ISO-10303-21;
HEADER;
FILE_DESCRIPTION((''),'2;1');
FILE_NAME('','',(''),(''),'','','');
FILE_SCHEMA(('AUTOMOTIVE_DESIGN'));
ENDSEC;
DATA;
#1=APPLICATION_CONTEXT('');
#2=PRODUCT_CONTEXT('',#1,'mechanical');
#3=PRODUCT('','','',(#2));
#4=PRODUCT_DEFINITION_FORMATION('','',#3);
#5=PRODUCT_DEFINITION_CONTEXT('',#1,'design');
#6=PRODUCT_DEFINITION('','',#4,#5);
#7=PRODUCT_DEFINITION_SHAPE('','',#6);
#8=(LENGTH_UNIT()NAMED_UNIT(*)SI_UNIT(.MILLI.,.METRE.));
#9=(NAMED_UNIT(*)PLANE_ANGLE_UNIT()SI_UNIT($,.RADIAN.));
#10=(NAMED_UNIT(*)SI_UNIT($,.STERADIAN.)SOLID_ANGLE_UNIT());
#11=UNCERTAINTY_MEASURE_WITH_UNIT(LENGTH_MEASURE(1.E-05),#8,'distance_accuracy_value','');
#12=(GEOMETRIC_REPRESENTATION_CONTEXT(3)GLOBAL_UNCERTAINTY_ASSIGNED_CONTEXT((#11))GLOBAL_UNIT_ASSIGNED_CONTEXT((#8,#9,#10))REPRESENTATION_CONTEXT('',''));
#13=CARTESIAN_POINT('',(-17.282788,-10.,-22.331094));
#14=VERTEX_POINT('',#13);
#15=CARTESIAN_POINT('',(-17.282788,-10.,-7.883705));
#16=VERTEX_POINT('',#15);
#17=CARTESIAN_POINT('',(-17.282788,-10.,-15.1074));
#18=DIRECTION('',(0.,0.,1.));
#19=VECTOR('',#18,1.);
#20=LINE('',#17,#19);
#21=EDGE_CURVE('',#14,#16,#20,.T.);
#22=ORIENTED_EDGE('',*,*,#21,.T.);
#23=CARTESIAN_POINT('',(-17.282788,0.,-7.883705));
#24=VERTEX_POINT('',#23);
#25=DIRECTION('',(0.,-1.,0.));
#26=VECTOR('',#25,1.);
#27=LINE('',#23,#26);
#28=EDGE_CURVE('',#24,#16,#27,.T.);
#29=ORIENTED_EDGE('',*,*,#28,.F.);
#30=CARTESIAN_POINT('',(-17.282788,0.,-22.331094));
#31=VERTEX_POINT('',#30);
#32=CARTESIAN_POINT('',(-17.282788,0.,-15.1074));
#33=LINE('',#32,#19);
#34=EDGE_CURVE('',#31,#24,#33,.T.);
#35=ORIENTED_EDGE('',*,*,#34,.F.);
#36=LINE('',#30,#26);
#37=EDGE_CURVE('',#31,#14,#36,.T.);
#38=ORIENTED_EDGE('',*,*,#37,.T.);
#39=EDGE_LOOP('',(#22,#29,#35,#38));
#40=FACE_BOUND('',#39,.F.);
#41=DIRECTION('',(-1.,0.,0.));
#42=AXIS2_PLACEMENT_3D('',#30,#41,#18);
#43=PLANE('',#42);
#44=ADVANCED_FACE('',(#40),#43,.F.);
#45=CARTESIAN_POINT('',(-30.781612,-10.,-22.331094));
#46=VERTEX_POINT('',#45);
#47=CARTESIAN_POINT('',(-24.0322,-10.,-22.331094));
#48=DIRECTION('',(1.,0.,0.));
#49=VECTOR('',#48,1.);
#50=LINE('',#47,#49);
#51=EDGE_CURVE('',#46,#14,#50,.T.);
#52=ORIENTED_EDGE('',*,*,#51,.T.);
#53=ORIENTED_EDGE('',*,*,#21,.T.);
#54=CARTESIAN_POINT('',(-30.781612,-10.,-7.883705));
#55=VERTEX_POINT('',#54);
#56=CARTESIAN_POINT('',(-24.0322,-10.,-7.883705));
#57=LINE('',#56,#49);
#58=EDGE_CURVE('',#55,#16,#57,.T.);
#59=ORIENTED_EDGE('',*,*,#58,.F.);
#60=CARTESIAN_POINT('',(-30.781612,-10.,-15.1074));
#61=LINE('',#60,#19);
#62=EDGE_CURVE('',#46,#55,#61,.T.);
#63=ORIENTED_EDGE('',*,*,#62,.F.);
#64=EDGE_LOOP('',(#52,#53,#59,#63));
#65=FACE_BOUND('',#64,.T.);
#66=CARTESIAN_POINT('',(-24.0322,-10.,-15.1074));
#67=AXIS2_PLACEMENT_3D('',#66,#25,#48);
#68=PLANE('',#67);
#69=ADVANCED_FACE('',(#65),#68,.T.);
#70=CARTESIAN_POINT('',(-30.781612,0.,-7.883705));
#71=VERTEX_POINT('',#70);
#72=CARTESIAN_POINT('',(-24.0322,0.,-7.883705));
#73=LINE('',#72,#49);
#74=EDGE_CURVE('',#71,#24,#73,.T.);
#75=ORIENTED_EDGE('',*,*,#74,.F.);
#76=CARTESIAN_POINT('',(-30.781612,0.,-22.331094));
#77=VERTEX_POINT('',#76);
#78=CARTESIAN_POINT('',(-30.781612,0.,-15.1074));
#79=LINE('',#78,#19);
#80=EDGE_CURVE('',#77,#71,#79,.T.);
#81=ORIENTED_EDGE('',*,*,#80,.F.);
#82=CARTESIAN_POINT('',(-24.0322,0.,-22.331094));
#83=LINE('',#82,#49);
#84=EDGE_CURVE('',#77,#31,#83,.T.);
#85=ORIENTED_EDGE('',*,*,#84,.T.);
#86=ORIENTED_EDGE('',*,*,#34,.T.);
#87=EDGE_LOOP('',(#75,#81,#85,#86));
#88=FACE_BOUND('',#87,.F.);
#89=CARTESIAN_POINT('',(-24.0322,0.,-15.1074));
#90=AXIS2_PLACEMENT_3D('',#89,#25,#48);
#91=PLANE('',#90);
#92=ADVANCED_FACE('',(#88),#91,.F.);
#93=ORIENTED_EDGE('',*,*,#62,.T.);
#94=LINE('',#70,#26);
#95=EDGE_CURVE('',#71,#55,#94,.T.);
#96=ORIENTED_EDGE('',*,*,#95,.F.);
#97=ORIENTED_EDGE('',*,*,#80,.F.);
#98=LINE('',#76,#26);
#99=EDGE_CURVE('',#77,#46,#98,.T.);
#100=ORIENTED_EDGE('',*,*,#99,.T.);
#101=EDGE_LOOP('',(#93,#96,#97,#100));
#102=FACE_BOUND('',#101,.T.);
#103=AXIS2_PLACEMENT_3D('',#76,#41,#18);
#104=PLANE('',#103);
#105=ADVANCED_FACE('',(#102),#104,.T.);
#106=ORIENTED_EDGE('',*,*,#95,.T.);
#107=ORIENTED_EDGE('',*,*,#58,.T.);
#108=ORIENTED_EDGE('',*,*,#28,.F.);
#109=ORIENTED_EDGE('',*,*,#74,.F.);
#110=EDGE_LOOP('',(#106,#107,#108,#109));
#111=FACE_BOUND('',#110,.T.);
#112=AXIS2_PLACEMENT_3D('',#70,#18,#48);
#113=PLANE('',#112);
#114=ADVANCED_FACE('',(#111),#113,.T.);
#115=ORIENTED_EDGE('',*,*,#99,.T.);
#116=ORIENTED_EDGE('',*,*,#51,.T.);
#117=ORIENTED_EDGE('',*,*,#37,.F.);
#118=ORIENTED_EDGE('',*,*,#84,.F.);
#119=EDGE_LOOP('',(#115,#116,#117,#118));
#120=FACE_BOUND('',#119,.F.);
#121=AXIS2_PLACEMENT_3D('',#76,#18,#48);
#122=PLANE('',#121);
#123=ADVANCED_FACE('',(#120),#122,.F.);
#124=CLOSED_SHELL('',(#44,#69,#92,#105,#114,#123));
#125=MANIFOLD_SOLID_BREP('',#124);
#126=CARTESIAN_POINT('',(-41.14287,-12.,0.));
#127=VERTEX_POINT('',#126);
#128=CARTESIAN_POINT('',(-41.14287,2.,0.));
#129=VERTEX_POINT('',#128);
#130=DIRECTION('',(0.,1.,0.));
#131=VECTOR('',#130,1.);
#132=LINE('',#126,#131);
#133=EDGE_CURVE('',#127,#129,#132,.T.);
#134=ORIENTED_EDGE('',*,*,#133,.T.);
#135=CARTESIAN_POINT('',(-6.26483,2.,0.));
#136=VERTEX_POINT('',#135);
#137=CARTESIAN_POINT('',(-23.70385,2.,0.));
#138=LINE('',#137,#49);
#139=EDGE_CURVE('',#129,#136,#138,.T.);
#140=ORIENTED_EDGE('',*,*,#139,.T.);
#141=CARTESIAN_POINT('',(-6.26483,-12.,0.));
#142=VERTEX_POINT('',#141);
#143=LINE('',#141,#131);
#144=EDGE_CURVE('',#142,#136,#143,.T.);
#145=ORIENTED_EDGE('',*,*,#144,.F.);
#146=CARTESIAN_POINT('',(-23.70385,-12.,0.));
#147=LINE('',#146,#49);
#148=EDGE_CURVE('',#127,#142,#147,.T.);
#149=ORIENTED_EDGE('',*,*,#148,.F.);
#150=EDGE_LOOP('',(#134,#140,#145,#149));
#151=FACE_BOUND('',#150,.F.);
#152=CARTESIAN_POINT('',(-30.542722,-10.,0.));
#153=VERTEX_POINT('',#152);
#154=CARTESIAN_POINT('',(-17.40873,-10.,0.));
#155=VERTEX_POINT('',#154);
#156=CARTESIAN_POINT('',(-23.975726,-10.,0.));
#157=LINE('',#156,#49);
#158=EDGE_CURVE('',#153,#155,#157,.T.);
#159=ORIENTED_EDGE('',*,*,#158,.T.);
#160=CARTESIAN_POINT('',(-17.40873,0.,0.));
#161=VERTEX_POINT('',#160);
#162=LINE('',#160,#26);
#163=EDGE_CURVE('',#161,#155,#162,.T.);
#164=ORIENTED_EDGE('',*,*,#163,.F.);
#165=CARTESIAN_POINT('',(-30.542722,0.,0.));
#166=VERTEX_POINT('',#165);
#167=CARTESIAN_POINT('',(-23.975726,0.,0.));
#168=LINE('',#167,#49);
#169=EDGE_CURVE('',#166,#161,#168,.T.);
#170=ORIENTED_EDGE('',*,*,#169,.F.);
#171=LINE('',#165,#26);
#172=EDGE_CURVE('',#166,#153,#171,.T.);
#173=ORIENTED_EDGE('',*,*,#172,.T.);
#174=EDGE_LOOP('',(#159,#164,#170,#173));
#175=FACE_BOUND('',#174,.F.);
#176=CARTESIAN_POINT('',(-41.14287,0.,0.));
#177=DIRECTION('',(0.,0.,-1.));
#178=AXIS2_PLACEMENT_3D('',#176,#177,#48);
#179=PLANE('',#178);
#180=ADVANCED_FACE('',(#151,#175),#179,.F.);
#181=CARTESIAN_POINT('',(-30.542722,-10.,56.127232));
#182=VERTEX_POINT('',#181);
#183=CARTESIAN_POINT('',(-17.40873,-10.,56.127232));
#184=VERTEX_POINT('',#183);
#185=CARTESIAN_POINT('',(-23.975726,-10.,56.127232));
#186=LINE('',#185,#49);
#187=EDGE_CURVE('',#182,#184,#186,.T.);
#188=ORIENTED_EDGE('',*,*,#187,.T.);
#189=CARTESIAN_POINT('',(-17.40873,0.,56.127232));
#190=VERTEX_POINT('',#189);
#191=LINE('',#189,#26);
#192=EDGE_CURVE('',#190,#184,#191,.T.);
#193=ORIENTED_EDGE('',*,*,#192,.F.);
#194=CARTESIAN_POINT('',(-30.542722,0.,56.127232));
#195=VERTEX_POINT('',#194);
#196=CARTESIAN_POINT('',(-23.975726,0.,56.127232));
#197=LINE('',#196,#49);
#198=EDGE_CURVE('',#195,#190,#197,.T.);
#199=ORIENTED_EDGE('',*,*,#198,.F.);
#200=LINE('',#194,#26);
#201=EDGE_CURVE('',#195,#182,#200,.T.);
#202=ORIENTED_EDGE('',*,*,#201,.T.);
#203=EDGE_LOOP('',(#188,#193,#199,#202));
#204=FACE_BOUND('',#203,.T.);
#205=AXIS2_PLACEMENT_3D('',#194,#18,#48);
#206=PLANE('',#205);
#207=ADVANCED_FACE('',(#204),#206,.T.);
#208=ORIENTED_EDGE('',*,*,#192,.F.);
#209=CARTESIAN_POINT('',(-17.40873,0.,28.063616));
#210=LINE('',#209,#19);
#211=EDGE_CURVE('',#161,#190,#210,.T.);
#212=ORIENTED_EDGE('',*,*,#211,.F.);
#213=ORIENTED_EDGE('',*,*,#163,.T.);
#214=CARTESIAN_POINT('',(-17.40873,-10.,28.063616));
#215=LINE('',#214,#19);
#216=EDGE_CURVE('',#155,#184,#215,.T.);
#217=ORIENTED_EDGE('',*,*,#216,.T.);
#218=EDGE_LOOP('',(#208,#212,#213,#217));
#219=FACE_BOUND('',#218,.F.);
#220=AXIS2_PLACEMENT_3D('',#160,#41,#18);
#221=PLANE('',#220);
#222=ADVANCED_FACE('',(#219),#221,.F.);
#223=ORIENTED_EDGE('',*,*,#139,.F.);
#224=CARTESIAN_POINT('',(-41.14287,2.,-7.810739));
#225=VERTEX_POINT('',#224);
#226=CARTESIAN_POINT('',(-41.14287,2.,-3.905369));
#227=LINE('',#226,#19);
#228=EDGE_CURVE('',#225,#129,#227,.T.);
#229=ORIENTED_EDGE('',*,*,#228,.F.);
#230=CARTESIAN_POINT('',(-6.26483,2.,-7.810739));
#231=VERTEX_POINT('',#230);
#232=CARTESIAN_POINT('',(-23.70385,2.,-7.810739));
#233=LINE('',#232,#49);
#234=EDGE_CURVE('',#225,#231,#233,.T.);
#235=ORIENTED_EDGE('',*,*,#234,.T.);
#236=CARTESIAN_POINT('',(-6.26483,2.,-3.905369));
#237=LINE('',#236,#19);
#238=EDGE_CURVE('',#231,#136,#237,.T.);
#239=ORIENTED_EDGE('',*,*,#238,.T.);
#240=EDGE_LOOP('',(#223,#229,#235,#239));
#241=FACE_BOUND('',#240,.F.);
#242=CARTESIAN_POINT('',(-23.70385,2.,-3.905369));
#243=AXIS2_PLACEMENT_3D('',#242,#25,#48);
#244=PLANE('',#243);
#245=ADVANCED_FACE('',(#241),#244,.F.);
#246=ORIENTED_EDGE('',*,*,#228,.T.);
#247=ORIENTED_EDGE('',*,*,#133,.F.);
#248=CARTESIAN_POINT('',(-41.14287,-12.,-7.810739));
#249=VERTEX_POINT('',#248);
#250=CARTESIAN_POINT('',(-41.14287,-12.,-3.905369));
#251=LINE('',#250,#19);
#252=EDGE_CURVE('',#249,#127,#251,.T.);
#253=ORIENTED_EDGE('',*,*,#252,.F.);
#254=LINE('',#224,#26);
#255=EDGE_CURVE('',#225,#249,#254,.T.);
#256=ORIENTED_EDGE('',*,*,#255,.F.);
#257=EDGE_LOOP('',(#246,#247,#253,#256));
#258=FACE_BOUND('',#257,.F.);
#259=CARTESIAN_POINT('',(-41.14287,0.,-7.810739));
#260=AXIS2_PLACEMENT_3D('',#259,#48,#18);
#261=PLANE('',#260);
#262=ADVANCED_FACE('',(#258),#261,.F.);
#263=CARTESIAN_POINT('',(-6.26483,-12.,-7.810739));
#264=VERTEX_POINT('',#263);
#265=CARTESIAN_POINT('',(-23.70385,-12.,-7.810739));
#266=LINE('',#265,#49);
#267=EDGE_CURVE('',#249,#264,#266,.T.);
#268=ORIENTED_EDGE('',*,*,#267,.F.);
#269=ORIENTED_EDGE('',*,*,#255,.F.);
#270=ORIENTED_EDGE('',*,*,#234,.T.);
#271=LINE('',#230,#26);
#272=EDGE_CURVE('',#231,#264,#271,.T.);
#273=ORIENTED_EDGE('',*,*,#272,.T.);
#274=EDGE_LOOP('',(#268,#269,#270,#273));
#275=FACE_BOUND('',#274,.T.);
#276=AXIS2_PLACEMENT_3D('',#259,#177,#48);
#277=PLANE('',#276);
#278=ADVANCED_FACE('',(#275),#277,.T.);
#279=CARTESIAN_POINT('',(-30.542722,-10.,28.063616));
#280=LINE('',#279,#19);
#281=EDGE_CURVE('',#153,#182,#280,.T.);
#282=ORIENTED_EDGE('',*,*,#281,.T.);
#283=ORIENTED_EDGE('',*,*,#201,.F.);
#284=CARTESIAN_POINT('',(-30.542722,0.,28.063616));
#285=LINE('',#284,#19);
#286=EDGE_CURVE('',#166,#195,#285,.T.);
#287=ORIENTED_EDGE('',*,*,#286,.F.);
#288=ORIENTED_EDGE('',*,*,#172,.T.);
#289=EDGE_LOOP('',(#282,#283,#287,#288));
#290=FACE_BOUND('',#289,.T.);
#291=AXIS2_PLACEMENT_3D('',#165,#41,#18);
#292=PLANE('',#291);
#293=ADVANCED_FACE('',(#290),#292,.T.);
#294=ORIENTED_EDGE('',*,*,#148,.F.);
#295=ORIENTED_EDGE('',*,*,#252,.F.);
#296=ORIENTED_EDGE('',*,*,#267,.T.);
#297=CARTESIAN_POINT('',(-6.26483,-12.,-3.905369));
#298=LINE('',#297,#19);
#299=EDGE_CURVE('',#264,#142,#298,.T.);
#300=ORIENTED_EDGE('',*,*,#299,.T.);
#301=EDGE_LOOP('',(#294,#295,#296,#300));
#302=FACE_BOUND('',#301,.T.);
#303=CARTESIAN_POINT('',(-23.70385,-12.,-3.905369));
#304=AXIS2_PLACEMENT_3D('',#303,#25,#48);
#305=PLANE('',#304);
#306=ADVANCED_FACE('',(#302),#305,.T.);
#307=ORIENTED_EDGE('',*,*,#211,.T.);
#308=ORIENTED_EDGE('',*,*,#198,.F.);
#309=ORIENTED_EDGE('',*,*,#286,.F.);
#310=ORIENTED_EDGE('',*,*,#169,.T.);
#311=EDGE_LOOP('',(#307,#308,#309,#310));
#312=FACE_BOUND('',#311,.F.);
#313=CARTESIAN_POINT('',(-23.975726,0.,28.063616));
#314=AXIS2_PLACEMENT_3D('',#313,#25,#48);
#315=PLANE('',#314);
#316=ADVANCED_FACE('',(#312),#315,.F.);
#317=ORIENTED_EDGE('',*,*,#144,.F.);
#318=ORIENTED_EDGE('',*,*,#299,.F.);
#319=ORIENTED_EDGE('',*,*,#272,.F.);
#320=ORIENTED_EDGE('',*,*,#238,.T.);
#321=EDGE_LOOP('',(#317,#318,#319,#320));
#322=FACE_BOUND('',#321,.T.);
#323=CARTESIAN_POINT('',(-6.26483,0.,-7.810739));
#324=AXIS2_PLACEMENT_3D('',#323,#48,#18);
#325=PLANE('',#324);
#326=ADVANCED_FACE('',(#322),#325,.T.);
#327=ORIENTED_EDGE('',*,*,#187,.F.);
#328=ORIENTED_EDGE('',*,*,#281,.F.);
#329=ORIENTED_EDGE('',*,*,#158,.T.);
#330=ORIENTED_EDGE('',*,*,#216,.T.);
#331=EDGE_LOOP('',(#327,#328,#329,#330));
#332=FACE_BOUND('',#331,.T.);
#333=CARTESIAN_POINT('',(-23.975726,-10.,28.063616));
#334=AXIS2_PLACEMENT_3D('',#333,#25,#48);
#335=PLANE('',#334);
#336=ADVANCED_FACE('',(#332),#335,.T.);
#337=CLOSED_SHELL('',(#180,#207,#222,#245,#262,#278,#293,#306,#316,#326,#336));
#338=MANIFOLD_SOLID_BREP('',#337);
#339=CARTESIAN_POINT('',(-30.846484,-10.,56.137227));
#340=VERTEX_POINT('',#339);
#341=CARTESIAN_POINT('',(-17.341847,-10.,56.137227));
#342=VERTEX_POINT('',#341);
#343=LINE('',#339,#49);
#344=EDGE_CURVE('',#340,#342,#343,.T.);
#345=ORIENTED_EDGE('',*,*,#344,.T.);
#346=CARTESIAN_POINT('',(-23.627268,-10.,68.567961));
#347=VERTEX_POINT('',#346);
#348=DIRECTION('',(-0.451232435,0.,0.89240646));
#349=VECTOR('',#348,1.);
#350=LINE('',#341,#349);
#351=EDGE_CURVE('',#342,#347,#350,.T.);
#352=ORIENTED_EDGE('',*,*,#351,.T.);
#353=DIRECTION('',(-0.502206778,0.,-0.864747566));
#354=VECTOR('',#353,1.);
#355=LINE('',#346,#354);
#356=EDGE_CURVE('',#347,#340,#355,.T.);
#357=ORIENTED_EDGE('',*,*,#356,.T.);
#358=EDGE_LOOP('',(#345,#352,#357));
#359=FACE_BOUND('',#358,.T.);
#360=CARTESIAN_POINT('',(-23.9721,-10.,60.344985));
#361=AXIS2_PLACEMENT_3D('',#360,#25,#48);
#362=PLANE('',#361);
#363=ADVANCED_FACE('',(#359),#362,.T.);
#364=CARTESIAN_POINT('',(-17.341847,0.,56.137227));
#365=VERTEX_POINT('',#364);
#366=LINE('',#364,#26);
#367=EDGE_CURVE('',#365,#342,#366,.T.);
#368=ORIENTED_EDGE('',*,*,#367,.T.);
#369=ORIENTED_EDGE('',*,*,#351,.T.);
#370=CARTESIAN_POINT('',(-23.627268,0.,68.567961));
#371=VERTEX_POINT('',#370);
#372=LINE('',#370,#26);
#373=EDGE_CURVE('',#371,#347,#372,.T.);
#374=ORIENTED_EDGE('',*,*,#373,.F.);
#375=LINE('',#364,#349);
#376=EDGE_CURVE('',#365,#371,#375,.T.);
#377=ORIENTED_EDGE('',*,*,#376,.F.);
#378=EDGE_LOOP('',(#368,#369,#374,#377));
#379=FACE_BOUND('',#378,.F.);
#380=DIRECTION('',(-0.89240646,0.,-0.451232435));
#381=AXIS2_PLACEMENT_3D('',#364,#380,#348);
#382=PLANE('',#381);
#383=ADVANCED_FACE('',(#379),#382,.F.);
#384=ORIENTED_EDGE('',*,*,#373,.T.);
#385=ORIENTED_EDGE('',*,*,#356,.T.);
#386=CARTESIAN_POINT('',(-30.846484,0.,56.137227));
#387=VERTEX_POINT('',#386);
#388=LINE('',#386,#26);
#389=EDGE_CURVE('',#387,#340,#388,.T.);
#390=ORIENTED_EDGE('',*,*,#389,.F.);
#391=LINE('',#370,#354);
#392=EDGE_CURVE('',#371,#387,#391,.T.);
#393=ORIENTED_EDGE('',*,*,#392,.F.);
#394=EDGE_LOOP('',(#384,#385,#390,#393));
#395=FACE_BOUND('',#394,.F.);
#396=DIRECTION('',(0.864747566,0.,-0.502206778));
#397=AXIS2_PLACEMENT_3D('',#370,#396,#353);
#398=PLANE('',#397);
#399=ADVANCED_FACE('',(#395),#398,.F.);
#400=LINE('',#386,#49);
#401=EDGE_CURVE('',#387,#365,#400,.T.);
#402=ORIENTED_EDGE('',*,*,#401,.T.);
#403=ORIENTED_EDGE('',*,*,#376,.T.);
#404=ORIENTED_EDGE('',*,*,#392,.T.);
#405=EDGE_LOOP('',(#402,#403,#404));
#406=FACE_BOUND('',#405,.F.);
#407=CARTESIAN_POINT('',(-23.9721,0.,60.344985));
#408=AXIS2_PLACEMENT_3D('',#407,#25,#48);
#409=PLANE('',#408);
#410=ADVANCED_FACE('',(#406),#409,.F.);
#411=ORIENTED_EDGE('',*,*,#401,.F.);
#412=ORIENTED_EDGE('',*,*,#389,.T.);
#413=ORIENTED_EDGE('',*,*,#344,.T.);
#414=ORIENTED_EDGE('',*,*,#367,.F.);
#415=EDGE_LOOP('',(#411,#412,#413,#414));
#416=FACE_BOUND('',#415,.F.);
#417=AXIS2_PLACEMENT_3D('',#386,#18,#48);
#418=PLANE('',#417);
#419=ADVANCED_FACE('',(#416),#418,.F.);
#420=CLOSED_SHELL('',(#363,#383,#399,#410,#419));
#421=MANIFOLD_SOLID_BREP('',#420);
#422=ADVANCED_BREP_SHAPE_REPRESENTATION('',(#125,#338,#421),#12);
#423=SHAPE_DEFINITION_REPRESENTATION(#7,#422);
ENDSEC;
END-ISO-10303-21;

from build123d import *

# Parameters (mm, degrees)
F3_DEPTH = 10
F2_W     = 13.4988240898
F2_H     = 14.4473891705
F1_W     = 34.8780401982
F1_H     = 7.810738869
F4_DEPTH = 12
F5_DEPTH = 2
F6_W     = 13.1339915097
F6_H     = 56.1272315681
F7_DEPTH = 10


# Not quite as in the source:
# - a feature names something its author has since deleted; it is built from what else it names


with BuildPart() as f3:
    # F0 (on Front) → F3 (new body)
    with BuildSketch(Plane.XZ):
        Polygon((-23.6272681504, 68.5679614544), (-30.8464840055, 56.137226522), (-17.3418466002, 56.137226522), align=None)
    extrude(amount=F3_DEPTH)


with BuildPart() as f3b:
    # F2 (on Front) → F3, piece 2 (new body)
    with BuildSketch(Plane.XZ):
        with Locations((-24.0321997553, -15.107399784)):
            Rectangle(F2_W, F2_H)
    extrude(amount=F3_DEPTH)


with BuildPart() as f4:
    # F1 (on Front) → F4 (new body)
    with BuildSketch(Plane.XZ):
        with Locations((-23.7038496416, -3.9053694345)):
            Rectangle(F1_W, F1_H)
    extrude(amount=F4_DEPTH)

    # F5 (add): a face of the model
    f5_faces = [f4.faces().sort_by_distance(p)[0] for p in [
        (-23.7038496416, 0, -3.9053694345),
    ]]
    extrude(f5_faces, amount=F5_DEPTH)

    # F6 (on Front) → F7 (join)
    with BuildSketch(Plane.XZ):
        with Locations((-23.975726217, 28.063615784)):
            Rectangle(F6_W, F6_H)
    extrude(amount=F7_DEPTH)


solid = Compound([f3.part, f3b.part, f4.part])
